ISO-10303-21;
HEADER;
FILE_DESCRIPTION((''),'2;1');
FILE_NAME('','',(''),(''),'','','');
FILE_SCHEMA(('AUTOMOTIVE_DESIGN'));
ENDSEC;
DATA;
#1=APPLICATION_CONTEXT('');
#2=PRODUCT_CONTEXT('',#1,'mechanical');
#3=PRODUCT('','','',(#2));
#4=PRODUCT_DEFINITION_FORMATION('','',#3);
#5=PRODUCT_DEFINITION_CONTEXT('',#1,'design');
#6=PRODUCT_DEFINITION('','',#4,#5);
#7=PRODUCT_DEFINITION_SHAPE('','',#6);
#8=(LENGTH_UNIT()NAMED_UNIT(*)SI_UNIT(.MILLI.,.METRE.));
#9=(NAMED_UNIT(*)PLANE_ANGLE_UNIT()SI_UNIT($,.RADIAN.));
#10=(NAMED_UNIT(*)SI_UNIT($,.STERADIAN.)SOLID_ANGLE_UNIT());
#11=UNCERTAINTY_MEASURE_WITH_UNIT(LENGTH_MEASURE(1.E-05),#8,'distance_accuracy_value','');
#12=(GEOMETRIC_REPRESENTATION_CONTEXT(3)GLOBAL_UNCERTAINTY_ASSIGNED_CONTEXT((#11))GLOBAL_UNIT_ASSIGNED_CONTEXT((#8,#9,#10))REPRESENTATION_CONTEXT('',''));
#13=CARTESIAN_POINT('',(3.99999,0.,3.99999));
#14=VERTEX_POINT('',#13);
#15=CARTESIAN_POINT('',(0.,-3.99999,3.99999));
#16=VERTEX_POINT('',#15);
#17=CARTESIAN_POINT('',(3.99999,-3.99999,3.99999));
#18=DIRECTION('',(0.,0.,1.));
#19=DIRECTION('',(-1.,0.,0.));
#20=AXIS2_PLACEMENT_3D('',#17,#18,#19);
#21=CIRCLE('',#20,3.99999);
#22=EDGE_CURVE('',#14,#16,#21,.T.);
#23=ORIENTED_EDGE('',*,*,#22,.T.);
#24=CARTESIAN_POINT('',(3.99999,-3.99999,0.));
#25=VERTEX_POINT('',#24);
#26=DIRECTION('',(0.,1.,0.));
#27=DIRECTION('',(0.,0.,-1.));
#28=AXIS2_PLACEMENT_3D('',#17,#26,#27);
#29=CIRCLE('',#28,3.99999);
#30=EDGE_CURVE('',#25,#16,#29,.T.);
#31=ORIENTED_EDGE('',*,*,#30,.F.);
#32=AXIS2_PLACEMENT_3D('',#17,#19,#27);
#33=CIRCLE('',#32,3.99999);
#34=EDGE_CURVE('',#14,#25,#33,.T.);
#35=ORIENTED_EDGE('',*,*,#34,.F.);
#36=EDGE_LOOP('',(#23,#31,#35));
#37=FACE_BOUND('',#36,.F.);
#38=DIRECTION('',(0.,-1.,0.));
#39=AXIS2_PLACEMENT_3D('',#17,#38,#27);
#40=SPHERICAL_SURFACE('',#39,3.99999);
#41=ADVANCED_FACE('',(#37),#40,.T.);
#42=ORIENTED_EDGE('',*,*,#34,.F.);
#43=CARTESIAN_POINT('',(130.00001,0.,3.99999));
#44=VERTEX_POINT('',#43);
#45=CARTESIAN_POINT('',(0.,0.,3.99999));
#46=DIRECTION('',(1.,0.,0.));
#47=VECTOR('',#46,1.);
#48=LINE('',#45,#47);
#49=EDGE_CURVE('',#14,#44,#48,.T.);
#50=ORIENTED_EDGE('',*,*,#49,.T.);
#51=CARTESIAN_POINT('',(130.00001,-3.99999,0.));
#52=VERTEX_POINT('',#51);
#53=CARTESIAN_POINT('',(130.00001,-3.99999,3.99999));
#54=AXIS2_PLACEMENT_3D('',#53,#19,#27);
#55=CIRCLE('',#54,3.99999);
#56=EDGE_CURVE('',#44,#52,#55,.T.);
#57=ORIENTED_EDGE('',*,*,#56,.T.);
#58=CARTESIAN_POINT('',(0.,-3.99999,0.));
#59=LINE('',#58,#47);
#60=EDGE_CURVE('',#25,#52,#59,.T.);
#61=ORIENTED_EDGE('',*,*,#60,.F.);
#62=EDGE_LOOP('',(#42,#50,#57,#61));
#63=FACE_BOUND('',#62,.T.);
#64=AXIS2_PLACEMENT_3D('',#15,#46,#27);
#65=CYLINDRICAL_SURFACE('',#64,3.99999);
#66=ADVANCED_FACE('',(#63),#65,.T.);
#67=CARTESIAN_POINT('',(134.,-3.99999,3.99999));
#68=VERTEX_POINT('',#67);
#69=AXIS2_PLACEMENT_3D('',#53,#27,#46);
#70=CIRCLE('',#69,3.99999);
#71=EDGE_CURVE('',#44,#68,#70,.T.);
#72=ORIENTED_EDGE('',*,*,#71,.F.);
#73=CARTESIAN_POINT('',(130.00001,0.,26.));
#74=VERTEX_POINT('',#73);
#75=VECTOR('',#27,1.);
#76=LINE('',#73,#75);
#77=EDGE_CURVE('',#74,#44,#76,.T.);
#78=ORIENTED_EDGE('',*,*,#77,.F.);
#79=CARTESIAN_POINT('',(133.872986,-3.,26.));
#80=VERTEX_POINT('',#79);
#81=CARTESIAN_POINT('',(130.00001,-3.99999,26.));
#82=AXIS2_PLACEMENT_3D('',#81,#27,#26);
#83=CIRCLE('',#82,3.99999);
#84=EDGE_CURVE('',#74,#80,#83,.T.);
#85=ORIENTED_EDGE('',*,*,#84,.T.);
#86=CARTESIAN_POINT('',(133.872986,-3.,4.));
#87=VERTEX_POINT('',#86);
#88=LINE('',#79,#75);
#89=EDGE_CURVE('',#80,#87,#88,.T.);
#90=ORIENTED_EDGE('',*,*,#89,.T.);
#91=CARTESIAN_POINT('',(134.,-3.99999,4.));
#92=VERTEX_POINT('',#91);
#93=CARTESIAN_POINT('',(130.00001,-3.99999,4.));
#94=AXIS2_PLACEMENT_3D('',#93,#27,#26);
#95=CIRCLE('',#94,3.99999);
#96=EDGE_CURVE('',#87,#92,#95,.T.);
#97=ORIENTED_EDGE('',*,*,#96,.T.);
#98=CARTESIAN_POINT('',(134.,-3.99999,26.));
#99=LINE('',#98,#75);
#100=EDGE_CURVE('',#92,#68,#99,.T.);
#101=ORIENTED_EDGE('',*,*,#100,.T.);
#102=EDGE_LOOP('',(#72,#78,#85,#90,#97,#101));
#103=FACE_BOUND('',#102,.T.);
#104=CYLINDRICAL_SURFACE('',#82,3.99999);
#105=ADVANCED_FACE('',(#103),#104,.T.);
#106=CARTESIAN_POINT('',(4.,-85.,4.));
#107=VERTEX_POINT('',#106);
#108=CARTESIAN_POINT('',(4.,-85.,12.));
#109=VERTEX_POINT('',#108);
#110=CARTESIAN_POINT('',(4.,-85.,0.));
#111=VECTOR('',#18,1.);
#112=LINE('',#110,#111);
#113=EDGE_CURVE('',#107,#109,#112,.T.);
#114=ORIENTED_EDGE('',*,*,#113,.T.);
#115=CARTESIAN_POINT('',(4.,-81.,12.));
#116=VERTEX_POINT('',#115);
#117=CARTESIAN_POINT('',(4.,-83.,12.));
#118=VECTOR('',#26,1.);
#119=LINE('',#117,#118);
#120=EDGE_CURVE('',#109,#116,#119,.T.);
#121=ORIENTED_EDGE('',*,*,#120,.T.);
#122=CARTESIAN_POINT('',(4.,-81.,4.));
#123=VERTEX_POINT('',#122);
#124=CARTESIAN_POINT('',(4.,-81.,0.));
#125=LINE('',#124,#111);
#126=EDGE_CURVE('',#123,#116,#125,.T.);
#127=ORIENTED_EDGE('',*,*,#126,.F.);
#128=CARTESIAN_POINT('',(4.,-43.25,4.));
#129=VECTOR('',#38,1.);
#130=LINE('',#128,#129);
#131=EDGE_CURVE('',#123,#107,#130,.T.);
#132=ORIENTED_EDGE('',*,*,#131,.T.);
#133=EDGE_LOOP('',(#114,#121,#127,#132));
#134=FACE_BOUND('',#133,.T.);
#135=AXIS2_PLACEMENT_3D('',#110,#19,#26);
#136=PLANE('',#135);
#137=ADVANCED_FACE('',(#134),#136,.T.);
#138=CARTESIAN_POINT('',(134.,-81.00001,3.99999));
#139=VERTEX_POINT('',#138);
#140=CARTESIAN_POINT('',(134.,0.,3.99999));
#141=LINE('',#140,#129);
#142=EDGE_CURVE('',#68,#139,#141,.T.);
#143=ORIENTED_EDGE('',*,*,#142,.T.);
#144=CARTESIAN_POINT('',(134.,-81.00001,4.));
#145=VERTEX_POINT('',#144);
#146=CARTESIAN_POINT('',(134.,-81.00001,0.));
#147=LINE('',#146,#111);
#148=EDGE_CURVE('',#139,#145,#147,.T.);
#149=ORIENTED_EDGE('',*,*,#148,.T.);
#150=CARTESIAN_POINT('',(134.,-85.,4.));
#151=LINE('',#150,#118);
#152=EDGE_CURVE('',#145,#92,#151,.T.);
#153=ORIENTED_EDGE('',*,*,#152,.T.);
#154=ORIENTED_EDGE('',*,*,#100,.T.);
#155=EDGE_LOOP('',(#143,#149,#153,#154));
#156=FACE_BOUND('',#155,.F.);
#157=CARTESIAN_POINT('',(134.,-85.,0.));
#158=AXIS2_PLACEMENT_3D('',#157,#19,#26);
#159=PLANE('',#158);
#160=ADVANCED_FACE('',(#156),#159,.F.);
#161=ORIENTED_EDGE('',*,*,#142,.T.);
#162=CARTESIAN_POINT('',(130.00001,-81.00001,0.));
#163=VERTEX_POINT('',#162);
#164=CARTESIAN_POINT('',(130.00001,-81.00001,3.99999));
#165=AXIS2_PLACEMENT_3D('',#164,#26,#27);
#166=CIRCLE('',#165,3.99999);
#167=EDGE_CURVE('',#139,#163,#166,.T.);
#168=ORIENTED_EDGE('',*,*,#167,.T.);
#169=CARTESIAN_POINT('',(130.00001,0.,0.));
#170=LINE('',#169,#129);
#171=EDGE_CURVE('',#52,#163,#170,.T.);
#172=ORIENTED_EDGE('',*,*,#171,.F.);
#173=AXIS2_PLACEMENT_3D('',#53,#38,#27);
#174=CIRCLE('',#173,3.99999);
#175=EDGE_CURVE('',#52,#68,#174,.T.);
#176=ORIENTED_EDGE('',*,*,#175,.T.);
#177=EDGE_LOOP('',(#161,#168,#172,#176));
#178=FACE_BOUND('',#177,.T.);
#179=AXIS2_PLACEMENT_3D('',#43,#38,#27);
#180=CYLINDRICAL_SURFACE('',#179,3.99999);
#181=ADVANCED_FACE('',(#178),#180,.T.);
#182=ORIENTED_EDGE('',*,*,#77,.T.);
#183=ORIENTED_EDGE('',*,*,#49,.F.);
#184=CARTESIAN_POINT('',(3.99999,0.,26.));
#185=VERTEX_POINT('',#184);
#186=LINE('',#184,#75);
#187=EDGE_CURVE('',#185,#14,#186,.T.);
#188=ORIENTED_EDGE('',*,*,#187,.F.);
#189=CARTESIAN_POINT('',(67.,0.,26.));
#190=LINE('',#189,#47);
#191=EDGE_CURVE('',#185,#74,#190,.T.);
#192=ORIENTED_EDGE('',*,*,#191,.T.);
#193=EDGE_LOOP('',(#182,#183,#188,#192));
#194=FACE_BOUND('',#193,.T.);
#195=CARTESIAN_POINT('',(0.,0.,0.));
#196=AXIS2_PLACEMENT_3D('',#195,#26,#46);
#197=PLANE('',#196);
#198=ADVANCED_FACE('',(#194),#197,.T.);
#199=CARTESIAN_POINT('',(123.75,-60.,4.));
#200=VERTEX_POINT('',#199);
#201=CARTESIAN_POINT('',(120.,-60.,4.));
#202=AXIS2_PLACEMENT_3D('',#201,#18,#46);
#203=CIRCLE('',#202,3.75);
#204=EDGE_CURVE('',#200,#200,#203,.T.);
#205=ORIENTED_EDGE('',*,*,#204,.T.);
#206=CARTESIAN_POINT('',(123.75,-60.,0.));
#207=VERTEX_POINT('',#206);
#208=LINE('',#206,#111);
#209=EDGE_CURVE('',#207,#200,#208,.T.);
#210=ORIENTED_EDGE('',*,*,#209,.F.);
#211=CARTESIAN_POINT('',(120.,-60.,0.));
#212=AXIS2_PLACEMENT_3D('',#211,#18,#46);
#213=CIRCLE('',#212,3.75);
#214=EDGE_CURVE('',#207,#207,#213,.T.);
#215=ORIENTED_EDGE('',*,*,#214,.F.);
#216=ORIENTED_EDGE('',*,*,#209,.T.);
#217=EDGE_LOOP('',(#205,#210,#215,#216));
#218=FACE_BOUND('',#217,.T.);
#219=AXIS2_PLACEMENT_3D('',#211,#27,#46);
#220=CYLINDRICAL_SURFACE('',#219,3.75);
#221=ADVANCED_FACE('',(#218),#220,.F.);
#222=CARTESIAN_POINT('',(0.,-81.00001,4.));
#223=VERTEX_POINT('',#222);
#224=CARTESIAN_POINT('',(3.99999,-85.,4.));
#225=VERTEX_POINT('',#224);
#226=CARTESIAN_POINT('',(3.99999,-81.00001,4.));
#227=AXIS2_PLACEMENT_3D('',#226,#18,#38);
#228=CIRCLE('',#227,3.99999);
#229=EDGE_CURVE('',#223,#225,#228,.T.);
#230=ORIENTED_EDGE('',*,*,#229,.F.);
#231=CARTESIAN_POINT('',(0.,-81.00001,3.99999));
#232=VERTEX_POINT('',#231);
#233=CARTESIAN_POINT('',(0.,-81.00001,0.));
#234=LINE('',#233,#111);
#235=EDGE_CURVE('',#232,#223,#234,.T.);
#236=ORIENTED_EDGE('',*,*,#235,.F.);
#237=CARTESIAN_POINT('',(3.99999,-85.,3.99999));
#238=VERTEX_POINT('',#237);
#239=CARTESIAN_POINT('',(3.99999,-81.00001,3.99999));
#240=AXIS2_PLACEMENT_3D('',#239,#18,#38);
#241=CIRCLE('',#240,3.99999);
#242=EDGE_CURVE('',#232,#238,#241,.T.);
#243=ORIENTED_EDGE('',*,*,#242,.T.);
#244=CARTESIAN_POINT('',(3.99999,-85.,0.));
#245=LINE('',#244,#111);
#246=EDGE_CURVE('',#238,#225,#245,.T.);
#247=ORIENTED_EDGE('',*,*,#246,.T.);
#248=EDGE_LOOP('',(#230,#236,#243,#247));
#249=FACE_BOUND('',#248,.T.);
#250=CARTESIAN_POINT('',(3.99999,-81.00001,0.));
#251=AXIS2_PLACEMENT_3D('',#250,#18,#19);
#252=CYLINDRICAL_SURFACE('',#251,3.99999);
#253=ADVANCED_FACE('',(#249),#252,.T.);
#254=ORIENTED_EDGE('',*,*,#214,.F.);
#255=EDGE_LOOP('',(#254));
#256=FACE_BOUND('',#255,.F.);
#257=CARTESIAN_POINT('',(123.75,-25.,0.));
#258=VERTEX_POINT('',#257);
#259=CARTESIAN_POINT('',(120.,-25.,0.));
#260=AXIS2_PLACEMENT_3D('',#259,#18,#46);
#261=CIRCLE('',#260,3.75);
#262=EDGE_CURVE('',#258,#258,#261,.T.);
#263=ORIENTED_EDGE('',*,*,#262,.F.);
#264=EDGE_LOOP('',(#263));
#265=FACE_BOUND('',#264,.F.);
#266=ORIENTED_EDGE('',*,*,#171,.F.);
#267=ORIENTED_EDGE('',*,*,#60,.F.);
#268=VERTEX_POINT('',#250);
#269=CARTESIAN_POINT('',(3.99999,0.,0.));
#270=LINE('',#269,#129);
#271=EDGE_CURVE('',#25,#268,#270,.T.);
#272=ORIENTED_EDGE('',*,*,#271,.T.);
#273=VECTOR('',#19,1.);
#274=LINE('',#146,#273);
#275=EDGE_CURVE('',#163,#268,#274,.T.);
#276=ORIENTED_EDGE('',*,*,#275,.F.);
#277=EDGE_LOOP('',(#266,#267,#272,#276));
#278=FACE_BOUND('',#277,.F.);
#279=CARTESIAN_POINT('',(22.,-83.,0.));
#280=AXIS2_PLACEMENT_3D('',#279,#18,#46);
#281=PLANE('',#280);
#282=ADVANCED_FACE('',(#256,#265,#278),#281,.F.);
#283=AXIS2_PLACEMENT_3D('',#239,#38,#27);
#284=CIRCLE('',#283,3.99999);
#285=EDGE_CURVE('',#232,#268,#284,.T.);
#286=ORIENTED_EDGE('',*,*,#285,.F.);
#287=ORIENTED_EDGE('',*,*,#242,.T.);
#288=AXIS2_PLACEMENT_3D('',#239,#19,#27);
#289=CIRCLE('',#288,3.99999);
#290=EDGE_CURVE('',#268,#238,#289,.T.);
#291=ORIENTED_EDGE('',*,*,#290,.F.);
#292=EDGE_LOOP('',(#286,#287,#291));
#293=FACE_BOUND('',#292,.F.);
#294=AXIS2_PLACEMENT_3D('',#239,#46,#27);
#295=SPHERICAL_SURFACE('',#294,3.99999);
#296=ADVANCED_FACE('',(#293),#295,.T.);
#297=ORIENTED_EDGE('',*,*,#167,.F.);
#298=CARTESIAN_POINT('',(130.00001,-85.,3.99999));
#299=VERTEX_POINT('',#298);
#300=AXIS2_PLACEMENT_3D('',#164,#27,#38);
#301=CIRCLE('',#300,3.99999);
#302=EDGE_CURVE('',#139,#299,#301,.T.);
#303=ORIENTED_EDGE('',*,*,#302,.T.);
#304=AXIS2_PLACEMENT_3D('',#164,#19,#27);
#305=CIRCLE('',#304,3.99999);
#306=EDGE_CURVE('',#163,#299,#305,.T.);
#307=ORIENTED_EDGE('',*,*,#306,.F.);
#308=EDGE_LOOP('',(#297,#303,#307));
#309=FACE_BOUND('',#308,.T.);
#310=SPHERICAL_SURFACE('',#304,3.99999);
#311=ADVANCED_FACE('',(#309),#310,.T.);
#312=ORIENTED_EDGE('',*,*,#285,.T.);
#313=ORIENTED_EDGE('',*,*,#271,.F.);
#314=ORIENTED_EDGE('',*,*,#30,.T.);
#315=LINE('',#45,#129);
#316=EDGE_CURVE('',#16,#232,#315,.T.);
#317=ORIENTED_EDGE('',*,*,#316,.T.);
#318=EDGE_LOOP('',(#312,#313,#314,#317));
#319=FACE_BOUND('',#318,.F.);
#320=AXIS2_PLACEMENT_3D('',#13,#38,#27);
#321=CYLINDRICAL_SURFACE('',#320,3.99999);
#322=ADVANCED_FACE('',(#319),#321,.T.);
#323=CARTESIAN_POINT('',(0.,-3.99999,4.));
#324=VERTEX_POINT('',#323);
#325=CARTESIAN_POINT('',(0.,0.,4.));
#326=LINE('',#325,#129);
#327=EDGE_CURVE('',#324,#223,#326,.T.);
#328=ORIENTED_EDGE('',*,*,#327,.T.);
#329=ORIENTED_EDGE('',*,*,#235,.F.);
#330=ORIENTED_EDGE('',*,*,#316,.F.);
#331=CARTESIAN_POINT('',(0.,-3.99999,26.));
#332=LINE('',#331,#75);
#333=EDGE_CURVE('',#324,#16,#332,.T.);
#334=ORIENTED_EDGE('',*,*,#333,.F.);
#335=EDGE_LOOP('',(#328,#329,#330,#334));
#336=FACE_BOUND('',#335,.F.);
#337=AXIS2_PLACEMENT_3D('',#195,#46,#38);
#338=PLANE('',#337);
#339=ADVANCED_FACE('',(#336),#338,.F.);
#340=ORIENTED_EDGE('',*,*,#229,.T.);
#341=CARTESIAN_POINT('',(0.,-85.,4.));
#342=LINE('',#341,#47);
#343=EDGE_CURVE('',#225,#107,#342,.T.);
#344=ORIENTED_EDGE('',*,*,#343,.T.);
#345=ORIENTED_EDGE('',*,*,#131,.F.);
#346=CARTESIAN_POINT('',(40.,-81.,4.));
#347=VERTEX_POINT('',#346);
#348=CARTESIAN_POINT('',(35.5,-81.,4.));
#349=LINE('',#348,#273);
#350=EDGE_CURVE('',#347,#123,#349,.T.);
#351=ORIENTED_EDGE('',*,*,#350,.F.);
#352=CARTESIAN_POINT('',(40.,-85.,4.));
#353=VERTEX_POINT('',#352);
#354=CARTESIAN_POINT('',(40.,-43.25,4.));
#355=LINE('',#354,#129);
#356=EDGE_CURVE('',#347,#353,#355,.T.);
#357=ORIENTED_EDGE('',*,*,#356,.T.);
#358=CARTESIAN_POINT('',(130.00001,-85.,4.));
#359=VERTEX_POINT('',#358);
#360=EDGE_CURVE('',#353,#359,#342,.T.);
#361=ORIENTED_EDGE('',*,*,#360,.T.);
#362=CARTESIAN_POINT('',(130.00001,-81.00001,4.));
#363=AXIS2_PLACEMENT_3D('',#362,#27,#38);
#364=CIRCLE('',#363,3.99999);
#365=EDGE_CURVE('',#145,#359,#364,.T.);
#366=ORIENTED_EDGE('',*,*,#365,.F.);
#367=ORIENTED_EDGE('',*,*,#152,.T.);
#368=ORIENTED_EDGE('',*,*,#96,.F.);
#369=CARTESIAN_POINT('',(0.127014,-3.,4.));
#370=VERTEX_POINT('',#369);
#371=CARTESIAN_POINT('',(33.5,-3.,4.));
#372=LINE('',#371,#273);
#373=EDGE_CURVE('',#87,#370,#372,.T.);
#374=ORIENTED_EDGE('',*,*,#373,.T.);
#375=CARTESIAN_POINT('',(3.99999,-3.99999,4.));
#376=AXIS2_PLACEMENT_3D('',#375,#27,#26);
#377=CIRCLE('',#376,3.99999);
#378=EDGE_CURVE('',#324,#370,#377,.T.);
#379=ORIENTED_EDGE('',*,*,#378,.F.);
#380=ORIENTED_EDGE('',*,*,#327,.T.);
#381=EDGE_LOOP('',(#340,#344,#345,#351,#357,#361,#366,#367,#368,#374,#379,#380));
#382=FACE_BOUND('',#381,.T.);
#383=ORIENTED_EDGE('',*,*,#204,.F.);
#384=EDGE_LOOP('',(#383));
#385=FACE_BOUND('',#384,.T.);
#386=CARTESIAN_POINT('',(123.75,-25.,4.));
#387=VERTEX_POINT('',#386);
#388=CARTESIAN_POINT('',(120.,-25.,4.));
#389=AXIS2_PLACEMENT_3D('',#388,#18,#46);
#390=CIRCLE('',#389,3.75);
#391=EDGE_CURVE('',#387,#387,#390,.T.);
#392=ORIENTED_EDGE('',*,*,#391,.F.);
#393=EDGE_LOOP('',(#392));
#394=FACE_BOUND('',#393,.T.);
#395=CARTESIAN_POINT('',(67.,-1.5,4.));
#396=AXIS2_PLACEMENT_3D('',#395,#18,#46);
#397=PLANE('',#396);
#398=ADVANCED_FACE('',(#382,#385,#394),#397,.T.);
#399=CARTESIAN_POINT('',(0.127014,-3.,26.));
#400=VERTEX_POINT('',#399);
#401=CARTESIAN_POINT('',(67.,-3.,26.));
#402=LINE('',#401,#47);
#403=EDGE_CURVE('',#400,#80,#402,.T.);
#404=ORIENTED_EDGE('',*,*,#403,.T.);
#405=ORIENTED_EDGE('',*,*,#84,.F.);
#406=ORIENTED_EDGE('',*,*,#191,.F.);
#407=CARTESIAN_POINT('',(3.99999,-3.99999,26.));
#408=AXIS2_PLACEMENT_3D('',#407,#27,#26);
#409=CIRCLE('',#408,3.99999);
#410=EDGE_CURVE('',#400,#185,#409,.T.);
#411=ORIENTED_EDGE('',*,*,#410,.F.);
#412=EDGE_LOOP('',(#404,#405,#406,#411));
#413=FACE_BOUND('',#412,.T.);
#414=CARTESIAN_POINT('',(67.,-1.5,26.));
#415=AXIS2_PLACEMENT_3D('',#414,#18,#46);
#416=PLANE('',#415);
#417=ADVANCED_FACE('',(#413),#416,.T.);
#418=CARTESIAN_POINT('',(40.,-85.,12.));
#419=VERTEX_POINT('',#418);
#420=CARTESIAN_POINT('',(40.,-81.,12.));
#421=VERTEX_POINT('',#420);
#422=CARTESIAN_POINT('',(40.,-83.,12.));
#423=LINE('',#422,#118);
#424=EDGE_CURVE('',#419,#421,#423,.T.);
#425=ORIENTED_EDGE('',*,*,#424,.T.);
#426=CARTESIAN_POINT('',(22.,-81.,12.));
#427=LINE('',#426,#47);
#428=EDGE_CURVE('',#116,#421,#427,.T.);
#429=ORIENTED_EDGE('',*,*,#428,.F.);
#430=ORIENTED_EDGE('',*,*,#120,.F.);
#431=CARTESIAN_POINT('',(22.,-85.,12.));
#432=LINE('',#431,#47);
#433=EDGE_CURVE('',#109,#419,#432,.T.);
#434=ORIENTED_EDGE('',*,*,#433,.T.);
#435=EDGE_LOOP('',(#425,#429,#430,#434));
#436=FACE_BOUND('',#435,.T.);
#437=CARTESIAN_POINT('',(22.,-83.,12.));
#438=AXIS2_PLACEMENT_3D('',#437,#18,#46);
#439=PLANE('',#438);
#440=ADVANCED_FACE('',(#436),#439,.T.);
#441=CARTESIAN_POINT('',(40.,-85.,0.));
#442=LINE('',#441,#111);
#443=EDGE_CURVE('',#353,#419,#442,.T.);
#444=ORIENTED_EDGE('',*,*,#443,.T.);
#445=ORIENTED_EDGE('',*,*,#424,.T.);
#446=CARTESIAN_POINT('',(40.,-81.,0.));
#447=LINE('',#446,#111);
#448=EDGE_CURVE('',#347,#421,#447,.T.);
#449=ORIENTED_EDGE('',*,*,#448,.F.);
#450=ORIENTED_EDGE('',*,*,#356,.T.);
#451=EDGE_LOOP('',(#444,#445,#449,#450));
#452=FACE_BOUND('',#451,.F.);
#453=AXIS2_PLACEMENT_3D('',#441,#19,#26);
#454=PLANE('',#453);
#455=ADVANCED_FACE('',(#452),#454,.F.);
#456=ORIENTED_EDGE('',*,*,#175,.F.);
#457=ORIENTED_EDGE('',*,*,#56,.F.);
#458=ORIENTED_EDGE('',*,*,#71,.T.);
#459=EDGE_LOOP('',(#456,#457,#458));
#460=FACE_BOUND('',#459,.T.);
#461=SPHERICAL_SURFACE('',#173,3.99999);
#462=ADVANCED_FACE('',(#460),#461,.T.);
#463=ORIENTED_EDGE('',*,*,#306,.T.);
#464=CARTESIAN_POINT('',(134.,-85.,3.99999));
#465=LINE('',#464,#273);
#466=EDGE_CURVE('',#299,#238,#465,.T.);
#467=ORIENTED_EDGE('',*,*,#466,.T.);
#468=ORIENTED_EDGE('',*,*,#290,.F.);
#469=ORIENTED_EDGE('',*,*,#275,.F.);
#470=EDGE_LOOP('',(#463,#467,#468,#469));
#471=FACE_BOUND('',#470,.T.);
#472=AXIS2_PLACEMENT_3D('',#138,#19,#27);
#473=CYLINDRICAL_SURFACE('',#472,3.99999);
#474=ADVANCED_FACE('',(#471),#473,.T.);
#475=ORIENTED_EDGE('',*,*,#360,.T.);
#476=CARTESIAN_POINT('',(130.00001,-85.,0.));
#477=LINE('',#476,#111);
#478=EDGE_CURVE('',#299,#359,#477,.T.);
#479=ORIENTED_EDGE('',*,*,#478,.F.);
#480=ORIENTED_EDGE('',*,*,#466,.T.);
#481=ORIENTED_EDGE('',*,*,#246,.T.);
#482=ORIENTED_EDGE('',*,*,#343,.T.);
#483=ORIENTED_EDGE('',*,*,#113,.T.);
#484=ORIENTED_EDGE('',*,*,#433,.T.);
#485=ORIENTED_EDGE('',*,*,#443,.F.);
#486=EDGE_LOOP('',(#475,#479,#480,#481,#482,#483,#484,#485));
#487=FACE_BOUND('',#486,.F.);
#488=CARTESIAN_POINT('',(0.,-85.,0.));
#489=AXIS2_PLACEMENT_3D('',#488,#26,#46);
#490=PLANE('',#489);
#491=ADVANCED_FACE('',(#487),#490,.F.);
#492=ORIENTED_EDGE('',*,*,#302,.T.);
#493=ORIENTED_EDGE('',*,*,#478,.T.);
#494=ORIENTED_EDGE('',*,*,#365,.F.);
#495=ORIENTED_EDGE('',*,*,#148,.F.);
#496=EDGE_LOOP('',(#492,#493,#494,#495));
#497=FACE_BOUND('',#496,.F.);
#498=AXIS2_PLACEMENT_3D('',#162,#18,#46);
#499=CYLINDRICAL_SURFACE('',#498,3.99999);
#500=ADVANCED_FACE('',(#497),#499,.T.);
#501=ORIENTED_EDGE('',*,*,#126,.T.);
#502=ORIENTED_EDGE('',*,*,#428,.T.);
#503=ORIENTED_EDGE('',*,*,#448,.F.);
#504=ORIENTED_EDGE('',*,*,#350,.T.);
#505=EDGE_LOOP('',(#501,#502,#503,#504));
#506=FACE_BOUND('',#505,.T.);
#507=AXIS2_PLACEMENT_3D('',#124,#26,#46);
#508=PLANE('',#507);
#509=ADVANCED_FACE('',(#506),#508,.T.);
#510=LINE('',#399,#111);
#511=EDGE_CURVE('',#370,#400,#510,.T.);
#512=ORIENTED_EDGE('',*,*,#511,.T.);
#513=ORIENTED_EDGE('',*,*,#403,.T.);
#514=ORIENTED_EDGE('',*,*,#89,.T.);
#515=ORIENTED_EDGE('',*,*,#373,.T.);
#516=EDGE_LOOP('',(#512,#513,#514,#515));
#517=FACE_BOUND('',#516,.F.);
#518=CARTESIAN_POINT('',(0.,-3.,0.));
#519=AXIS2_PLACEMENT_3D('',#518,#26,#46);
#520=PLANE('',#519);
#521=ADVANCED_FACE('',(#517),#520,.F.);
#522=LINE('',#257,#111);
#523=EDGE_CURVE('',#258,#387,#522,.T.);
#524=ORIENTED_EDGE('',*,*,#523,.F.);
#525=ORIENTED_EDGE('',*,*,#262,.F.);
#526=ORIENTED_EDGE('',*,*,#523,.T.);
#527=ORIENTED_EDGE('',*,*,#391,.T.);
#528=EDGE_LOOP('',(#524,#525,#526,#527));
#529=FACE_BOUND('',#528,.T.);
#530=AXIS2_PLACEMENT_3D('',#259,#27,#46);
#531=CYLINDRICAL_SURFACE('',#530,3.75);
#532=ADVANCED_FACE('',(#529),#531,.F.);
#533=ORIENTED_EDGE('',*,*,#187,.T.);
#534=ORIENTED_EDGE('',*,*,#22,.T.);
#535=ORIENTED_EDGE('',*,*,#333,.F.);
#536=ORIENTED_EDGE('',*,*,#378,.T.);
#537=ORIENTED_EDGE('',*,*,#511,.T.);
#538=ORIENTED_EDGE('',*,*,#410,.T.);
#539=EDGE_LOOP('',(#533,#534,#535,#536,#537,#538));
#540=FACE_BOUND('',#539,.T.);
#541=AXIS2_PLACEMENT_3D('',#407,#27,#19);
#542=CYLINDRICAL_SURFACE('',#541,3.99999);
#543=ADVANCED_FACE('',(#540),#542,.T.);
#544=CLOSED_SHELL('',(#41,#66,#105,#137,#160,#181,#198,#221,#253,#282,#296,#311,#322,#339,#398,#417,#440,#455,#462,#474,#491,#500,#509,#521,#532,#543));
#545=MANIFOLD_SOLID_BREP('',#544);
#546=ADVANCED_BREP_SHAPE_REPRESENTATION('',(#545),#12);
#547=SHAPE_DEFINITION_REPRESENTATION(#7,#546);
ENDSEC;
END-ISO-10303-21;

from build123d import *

# Parameters (mm, degrees)
F0_W     = 134
F0_H     = 3
F0_W_2   = 36
F0_H_2   = 4
F0_R     = 3.75
F1_DEPTH = 4
F2_DEPTH = 26
F3_DEPTH = 12
F4_R     = 3.99999


# Not quite as in the source:
# - a fillet or chamfer is up to 0.001 mm smaller than in the source, because OpenCascade refuses the exact size


with BuildPart() as f1:
    # F0 (on Top) → F1 (new body)
    with BuildSketch(Plane.XY):
        with Locations((67, -1.5)):
            Rectangle(F0_W, F0_H)
        with Locations((22, -83)):
            Rectangle(F0_W_2, F0_H_2)
        Polygon((134, -3), (0, -3), (0, -85), (4, -85), (4, -81), (40, -81), (40, -85), (134, -85), align=None)
        with Locations((120, -60)):
            Circle(F0_R, mode=Mode.SUBTRACT)
        with Locations((120, -25)):
            Circle(F0_R, mode=Mode.SUBTRACT)
    extrude(amount=F1_DEPTH)

    # F0 (on Top) → F2 (join)
    with BuildSketch(Plane.XY):
        with Locations((67, -1.5)):
            Rectangle(F0_W, F0_H)
    extrude(amount=F2_DEPTH)

    # F0 (on Top) → F3 (join)
    with BuildSketch(Plane.XY):
        with Locations((22, -83)):
            Rectangle(F0_W_2, F0_H_2)
    extrude(amount=F3_DEPTH)

    # F4 (radius 4 in the source; OpenCascade refuses exactly that, so slightly less here)
    f4_edges = [f1.edges().sort_by_distance(p)[0] for p in [
        (67, -85, 0),
        (134, -42.5, 0),
        (0, -42.5, 0),
        (67, 0, 0),
        (134, 0, 13),
        (0, 0, 13),
        (134, -85, 2),
        (0, -85, 2),
    ]]
    fillet(f4_edges, radius=F4_R)


solid = f1.part
